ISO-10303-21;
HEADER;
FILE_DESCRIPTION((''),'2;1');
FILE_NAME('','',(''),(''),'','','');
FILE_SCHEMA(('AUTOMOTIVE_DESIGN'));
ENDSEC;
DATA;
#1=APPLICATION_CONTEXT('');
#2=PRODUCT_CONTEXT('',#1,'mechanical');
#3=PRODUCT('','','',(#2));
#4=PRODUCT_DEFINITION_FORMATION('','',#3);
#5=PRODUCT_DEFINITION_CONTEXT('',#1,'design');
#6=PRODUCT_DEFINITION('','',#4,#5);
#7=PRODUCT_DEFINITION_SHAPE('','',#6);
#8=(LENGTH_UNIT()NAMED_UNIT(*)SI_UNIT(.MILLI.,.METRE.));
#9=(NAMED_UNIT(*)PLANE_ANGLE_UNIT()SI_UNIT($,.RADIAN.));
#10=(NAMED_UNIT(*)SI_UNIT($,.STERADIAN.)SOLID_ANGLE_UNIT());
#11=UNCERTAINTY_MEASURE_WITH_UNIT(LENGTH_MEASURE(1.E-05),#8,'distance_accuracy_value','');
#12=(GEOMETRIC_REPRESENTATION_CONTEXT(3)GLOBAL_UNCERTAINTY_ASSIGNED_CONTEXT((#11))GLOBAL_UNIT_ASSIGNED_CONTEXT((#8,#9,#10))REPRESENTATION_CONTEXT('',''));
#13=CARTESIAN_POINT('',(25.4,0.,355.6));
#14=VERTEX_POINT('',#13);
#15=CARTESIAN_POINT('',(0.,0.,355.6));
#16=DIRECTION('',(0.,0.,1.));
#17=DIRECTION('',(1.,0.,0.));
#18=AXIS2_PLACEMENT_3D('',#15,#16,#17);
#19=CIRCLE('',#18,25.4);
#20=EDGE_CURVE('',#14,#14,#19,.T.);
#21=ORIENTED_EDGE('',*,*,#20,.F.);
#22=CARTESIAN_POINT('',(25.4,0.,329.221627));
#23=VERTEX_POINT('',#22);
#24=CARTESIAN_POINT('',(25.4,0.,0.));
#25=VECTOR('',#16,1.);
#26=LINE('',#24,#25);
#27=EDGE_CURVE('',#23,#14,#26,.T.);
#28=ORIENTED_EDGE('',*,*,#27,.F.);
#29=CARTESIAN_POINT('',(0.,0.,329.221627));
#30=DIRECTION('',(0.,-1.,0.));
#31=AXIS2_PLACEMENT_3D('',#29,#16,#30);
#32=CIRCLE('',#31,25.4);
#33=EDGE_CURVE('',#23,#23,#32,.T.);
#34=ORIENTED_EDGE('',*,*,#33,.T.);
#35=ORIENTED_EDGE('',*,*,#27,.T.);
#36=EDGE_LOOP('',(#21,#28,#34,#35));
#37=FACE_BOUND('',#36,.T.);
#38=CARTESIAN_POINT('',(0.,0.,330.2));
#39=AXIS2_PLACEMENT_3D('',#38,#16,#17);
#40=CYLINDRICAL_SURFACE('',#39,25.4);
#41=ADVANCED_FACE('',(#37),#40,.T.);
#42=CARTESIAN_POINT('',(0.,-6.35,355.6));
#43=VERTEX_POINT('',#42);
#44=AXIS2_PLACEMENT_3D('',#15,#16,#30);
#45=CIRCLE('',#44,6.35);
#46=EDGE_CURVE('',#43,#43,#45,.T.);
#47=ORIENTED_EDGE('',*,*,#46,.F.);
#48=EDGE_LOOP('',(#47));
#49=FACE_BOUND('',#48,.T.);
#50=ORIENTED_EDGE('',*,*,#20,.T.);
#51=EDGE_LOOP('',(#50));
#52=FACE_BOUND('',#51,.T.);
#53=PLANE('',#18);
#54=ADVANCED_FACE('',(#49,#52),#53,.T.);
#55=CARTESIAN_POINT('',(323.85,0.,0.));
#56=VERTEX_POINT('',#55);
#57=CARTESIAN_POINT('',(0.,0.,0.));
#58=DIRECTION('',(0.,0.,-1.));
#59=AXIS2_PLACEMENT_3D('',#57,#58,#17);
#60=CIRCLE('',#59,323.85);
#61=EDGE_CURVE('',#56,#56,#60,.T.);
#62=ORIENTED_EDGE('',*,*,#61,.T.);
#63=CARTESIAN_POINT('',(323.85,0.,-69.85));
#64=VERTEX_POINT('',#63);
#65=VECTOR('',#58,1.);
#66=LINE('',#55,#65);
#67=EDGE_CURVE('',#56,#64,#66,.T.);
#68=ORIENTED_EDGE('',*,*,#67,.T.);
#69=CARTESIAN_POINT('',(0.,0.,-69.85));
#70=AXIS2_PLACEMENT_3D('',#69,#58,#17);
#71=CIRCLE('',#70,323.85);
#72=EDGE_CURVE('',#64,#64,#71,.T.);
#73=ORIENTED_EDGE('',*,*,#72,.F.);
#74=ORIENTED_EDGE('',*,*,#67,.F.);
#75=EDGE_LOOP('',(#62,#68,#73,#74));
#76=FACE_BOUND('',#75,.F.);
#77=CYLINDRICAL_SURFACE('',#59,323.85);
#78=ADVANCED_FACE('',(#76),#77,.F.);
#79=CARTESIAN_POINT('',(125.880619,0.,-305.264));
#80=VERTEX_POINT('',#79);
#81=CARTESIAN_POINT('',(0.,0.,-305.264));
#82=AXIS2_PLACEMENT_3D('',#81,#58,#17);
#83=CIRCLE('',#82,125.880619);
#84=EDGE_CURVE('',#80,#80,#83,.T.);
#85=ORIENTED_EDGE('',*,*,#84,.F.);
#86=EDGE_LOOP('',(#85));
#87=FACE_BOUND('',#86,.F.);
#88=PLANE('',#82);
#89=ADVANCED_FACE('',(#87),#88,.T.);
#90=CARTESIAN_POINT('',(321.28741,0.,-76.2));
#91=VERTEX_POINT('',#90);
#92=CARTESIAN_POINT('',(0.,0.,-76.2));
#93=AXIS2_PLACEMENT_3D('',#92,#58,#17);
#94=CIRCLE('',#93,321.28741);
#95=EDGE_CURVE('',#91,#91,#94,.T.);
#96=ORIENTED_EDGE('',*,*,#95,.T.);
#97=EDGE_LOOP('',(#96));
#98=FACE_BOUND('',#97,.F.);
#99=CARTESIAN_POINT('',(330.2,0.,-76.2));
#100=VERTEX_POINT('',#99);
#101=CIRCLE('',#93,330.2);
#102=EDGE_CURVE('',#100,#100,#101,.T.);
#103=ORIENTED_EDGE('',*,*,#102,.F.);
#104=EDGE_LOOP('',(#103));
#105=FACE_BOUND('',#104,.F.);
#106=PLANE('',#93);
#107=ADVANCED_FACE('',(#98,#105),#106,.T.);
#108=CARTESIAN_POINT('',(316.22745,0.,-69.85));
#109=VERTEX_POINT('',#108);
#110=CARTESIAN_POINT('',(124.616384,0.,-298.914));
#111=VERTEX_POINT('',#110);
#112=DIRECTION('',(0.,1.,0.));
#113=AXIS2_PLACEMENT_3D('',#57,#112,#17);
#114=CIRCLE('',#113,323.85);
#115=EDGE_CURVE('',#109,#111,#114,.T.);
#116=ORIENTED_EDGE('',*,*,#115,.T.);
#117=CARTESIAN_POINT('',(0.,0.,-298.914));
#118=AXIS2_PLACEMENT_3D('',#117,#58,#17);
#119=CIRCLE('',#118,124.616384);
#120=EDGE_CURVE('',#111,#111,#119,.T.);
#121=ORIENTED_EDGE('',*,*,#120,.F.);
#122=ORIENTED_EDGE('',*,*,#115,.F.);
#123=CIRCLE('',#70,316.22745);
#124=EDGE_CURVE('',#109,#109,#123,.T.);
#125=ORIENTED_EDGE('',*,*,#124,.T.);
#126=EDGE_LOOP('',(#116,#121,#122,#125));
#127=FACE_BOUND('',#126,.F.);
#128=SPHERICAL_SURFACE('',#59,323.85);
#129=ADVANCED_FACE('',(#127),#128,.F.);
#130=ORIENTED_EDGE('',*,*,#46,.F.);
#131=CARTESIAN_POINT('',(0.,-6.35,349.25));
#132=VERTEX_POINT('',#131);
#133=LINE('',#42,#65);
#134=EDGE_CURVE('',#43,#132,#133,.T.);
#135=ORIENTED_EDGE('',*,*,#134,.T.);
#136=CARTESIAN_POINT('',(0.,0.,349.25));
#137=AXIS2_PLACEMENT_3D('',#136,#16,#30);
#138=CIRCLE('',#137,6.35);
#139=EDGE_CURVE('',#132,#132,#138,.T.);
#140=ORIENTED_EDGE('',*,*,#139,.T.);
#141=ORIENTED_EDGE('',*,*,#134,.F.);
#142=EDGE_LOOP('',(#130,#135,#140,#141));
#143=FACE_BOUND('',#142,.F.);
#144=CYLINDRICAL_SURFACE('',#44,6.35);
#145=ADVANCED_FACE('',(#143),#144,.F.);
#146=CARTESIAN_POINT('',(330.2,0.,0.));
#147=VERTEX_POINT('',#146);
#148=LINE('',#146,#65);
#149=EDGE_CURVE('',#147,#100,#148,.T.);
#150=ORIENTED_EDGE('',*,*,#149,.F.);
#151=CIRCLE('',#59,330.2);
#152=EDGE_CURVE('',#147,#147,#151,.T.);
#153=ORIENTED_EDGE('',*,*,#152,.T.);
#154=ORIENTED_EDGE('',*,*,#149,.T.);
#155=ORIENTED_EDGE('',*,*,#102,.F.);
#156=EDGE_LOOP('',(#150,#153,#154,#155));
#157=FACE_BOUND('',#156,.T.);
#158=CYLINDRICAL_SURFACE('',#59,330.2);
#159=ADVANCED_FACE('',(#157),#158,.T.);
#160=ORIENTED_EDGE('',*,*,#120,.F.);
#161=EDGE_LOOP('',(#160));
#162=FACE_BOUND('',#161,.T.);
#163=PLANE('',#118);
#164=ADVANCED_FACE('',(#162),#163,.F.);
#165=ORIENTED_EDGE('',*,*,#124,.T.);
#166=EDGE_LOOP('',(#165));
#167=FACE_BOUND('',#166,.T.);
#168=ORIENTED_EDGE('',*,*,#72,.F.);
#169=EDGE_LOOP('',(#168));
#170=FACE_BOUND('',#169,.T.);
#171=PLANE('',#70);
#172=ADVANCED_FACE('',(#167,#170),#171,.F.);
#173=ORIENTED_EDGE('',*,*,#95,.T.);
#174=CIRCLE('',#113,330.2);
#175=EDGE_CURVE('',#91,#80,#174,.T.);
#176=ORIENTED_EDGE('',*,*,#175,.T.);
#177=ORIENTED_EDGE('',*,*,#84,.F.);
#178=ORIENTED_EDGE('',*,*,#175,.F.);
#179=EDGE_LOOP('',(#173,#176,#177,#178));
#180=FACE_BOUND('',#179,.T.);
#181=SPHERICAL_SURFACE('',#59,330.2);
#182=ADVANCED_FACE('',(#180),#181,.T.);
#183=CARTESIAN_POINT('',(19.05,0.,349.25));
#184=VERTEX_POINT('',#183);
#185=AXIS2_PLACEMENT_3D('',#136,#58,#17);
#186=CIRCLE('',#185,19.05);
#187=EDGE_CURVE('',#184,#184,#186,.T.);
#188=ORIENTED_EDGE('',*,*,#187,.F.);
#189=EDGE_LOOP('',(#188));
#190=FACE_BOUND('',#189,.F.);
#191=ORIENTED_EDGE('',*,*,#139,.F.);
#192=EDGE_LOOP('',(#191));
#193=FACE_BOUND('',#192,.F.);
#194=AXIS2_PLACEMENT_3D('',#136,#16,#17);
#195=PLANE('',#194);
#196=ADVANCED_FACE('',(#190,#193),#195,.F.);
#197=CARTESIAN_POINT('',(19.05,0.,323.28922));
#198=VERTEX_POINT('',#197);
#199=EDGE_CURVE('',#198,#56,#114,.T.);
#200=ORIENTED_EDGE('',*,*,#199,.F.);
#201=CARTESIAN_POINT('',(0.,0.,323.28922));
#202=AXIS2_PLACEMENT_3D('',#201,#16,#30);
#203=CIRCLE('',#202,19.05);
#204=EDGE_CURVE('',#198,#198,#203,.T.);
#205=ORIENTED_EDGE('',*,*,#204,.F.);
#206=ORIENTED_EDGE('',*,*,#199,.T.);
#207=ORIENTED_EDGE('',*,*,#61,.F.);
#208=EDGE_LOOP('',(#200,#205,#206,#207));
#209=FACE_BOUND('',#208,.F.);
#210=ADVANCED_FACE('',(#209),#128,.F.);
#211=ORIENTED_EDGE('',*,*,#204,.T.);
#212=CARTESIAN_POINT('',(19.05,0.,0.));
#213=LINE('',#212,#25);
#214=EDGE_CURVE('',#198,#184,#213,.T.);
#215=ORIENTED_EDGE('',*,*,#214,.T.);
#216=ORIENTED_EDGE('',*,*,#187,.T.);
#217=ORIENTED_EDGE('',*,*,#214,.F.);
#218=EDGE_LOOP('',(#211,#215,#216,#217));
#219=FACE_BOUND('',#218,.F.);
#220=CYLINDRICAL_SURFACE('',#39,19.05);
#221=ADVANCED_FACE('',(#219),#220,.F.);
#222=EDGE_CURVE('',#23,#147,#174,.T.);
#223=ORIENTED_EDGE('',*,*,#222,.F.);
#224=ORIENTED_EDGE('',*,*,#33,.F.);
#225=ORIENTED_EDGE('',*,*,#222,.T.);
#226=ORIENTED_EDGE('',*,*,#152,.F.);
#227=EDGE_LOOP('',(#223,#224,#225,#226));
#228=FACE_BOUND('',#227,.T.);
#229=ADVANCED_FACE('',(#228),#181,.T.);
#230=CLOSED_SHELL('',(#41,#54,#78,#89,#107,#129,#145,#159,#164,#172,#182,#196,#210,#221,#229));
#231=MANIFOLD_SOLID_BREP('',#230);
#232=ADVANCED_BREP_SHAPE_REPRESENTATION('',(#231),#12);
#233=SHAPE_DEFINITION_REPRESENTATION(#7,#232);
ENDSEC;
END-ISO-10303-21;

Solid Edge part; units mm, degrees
sketch "Sketch1" plane through (0, 0, 0) normal (0, -1, 0) x (1, 0, 0)
  line L0 (0, 0) -> (0, -330.2)
  line L1 (0, 0) -> (0, 330.2)
  arc A0 (0, 330.2) -> (0, -330.2) centre (0, 0) cw
revolve "RevolvedProtrusion1" add sketch "Sketch1" angle 360 about axis through (0, 0, 0) along (0, 0, 1)
sketch "Sketch2" plane through (0, 0, 0) normal (0, -1, 0) x (1, 0, 0)
  line L0 (0, -305.264) -> (125.8807, -305.264)
revolve "RevolvedCutout1" cut sketch "Sketch2" angle 360 about axis through (0, 0, -305.264) along (0, 0, -1) material side at (62.9404, 0, -305.314)
sketch "Sketch3" plane through (0, 0, 0) normal (0, -1, 0) x (1, 0, 0)
  line L0 (0, -76.2) -> (330.2, -76.2)
  line L1 (330.2, 0) -> (330.2, -76.2)
  line L2 (0, 0) -> (330.2, 0)
  line L3 (0, 0) -> (0, -76.2)
revolve "RevolvedProtrusion2" add sketch "Sketch3" angle 360 about axis through (0, 0, 0) along (0, 0, -1)
sketch "Sketch4" plane through (0, 0, 330.2) normal (0, 0, 1) x (1, 0, 0)
  circle A0 centre (0, 0) radius 25.4
extrude "Protrusion1" add sketch "Sketch4" against normal up to vertex (330.2 mm away) and the other way blind 25.4
shell "Thinwall_1" thickness 6.35 removed faces 1 at (-17.4413, -16.4253, 355.6)
sketch "Sketch5" plane through (0, 0, 355.6) normal (0, 0, 1) x (0, -1, 0)
  circle A0 centre (0, 0) radius 19.05
  circle A1 centre (0, 0) radius 6.35
  dimension "D1" = 12.7
extrude "ExtrudedProtrusion_3" add sketch "Sketch5" against normal blind 6.35
